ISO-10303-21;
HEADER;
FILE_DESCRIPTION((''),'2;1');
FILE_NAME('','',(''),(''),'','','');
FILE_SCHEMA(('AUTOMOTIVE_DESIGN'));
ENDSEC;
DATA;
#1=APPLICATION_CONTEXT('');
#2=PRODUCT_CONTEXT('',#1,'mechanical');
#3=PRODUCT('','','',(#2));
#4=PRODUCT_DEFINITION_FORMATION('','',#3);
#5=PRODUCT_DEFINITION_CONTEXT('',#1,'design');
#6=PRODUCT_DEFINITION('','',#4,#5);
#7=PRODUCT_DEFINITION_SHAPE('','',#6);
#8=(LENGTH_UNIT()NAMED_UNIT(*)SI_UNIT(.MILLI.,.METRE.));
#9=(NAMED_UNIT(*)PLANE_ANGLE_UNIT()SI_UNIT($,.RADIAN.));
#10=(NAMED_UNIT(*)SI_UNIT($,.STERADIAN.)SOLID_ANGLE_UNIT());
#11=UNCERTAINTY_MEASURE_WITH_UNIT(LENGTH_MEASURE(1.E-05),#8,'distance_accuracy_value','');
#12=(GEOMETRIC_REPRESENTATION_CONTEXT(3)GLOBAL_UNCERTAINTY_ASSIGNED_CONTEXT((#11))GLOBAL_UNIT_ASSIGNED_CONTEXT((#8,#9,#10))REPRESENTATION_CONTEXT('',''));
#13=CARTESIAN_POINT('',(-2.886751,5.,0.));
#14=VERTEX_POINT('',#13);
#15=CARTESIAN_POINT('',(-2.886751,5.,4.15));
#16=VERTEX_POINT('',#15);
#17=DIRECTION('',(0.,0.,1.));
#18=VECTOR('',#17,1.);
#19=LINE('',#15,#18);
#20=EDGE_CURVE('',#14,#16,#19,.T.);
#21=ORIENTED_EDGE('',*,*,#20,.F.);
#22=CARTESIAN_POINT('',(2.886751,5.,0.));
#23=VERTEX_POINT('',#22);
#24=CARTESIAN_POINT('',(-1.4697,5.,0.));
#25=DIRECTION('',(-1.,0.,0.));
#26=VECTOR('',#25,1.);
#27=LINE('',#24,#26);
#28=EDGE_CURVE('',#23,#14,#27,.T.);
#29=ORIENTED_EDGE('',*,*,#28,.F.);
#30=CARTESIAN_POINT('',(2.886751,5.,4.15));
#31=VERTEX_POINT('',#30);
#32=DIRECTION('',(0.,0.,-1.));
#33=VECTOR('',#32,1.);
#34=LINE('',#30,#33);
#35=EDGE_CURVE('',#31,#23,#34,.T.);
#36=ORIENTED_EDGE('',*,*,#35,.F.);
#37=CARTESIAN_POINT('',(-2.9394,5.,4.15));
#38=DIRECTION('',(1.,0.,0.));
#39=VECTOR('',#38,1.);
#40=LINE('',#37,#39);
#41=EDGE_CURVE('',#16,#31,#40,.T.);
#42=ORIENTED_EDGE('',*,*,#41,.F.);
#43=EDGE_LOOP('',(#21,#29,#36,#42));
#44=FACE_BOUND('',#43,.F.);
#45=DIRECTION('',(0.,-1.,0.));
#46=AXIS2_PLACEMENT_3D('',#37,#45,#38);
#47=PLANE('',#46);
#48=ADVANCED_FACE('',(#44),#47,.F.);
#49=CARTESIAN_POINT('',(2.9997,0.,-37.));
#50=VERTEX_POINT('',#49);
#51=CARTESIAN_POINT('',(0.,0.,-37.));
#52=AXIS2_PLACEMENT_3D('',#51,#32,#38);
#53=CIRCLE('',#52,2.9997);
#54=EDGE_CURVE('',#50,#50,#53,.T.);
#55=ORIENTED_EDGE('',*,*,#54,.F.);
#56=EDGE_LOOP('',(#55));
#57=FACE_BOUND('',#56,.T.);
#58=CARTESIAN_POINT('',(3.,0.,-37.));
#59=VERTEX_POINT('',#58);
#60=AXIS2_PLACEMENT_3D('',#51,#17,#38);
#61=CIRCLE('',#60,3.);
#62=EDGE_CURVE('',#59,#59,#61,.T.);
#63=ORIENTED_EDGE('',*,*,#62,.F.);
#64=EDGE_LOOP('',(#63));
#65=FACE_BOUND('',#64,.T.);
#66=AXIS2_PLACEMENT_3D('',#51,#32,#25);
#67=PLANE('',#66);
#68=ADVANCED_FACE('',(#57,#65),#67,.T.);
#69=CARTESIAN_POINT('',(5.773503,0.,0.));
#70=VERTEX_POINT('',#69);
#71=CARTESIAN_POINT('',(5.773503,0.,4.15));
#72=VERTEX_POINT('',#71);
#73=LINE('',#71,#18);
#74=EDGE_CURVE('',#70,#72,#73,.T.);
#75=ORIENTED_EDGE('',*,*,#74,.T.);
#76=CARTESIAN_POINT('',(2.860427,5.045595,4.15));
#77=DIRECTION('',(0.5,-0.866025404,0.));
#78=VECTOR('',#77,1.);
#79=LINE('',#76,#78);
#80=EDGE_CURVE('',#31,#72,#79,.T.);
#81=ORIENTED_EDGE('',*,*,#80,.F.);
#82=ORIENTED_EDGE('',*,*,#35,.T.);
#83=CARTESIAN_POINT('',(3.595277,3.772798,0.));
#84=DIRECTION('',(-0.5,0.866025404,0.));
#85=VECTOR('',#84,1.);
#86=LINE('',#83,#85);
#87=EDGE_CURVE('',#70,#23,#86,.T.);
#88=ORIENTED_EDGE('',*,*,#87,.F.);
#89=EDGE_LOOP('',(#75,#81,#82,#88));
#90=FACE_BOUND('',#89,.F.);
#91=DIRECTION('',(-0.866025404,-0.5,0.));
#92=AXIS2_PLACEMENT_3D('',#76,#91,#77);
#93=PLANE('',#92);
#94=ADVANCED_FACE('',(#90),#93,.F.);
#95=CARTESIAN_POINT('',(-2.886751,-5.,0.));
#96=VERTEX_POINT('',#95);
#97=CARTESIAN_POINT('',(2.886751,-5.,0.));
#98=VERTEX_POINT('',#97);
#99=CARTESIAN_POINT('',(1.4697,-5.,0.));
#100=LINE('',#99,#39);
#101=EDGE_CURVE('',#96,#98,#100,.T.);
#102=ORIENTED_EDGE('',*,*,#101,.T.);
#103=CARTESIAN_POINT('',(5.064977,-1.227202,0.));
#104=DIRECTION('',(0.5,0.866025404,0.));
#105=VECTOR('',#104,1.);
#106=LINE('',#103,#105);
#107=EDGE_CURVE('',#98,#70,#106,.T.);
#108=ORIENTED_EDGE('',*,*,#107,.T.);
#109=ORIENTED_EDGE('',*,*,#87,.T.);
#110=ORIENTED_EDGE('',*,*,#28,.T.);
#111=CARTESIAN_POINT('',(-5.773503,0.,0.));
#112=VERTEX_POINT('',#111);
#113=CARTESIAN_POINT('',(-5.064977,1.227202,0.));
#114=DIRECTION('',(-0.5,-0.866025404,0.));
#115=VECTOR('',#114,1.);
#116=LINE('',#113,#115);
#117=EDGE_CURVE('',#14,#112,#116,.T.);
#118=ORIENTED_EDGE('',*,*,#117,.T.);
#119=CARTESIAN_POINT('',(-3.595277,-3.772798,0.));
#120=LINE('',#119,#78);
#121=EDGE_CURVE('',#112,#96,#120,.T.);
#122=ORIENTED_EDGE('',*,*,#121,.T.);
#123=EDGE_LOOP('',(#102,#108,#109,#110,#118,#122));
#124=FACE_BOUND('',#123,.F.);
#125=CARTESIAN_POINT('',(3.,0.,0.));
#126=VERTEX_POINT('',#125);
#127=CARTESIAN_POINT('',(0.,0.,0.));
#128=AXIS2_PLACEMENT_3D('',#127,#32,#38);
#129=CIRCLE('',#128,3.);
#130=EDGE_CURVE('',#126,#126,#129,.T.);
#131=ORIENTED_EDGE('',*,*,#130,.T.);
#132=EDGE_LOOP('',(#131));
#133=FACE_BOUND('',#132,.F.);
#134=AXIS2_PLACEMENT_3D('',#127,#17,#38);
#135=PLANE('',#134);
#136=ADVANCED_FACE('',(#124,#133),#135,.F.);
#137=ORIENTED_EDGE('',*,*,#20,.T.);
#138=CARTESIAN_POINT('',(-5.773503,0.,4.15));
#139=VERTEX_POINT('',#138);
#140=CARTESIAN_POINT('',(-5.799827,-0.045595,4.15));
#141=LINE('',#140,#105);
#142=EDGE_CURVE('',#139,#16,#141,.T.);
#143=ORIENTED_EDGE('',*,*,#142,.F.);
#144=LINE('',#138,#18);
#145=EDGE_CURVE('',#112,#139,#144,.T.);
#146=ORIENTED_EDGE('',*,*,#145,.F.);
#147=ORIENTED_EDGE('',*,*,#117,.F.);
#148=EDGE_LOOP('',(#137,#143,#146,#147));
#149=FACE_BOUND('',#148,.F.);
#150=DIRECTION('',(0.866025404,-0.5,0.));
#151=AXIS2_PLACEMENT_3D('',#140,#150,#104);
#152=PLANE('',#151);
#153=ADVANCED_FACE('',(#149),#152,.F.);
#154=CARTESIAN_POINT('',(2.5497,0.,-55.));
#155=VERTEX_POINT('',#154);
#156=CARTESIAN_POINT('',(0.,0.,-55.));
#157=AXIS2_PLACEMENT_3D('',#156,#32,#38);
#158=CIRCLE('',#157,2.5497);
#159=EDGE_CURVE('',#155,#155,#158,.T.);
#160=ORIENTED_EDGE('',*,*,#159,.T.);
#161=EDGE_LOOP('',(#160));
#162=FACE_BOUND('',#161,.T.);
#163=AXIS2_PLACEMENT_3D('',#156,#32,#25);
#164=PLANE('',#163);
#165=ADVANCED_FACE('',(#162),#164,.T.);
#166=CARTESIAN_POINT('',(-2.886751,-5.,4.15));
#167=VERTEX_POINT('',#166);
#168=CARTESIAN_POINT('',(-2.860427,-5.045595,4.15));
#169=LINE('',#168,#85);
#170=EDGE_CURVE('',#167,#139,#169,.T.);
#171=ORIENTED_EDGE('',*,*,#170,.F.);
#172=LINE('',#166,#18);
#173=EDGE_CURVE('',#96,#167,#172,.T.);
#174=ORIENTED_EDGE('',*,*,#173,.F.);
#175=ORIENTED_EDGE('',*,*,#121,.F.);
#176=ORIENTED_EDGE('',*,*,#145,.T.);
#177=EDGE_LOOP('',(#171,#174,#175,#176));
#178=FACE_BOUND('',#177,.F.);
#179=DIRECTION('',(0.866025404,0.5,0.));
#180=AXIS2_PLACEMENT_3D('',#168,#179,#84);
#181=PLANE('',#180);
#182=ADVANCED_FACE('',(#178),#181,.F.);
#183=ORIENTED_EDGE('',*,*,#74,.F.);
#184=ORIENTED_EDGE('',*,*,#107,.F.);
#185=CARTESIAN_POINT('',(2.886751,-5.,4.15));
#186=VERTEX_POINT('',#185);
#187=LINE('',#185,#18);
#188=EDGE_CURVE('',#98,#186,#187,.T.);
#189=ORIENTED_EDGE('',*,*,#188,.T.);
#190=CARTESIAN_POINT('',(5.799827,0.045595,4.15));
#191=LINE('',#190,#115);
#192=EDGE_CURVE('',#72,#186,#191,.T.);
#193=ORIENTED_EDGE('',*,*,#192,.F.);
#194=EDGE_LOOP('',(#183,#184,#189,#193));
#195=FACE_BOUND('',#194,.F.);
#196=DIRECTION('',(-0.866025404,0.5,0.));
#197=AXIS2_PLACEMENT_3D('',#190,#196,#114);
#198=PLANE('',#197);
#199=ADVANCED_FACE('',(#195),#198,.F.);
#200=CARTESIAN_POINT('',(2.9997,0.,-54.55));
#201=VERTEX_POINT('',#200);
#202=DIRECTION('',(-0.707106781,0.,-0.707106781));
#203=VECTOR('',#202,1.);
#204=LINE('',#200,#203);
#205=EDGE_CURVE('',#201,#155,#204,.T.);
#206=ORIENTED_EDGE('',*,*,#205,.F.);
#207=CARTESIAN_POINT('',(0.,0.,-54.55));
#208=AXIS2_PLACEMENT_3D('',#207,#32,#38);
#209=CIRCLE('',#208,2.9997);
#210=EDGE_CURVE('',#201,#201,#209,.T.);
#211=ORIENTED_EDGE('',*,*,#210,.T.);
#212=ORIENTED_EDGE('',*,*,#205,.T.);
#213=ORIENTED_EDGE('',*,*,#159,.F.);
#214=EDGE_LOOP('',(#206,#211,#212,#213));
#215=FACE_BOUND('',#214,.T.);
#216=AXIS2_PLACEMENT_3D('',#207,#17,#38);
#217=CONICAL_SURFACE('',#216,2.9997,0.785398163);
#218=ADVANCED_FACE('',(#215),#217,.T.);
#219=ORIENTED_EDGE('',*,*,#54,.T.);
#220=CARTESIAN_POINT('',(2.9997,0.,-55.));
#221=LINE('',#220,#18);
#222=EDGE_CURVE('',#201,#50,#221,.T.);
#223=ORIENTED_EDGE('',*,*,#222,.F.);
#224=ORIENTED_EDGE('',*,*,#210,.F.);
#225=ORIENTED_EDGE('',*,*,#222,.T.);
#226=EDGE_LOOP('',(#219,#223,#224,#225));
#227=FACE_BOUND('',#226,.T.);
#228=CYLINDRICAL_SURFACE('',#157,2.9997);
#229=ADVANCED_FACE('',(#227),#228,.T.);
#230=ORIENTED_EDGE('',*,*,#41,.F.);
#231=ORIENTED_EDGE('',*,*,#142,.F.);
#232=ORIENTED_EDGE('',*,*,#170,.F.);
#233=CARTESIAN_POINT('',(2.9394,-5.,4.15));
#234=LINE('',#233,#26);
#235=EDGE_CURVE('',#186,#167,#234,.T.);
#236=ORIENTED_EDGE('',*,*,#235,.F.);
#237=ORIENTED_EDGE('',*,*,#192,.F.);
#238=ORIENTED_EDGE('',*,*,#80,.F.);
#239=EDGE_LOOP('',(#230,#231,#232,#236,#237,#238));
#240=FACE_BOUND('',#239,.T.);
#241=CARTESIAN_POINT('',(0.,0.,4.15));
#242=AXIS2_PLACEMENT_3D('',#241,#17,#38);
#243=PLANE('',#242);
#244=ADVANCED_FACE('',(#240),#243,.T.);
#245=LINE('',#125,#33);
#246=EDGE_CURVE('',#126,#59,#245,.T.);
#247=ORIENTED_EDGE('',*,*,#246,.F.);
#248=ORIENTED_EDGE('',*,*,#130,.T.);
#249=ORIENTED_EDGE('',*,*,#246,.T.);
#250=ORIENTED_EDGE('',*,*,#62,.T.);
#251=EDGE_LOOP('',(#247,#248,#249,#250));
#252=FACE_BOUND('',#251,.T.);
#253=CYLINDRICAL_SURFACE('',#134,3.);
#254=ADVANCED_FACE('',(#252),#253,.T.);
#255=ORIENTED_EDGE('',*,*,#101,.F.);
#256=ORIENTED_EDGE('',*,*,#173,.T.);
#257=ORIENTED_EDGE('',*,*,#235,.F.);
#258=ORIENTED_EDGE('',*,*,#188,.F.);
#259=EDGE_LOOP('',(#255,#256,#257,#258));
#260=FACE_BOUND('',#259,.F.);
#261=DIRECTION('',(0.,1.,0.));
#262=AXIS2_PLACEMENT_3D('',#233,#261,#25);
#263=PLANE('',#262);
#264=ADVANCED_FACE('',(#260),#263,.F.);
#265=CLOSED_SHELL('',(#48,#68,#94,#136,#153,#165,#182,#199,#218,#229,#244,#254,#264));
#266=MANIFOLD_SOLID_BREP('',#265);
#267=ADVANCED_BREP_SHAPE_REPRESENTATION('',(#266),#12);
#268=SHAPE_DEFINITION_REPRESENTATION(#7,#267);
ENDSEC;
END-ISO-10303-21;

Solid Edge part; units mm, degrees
sketch "Sketch1" plane through (0, 0, 0) normal (0, 0, 1) x (1, 0, 0)
  circle A0 centre (0, 0) radius 5.8
  dimension "D1" = 11.6
extrude "Protrusion1" add sketch "Sketch1" along normal blind 4.15
sketch "Sketch2" plane through (0, 0, 0) normal (0, 0, -1) x (1, 0, 0)
  circle A0 centre (0, 0) radius 3
extrude "Protrusion2" add sketch "Sketch2" along normal blind 55
sketch "Sketch3" plane through (0, 0, -55) normal (0, 0, -1) x (1, 0, 0)
  circle A0 centre (0, 0) radius 2.9997
extrude "Cutout1" cut sketch "Sketch3" against normal blind 18 flip side to cut
chamfer "Chamfer_1" distance 0.45 angle 45 1 edges at (-2.9997, 0, -55)
sketch "Sketch4" plane through (0, 0, 4.15) normal (0, 0, 1) x (1, 0, 0)
  line L0 (-2.9394, 5) -> (2.9394, 5)
  dimension "D1" = 10
extrude "Cutout2" cut sketch "Sketch4" against normal up to next material side at (0, 5.05, 4.15)
pattern_circular "Pattern1" count 6 over 360 about axis through (0, 0, 4.15) along (0, 0, 1) of "Cutout2"
properties part number "24104714"
